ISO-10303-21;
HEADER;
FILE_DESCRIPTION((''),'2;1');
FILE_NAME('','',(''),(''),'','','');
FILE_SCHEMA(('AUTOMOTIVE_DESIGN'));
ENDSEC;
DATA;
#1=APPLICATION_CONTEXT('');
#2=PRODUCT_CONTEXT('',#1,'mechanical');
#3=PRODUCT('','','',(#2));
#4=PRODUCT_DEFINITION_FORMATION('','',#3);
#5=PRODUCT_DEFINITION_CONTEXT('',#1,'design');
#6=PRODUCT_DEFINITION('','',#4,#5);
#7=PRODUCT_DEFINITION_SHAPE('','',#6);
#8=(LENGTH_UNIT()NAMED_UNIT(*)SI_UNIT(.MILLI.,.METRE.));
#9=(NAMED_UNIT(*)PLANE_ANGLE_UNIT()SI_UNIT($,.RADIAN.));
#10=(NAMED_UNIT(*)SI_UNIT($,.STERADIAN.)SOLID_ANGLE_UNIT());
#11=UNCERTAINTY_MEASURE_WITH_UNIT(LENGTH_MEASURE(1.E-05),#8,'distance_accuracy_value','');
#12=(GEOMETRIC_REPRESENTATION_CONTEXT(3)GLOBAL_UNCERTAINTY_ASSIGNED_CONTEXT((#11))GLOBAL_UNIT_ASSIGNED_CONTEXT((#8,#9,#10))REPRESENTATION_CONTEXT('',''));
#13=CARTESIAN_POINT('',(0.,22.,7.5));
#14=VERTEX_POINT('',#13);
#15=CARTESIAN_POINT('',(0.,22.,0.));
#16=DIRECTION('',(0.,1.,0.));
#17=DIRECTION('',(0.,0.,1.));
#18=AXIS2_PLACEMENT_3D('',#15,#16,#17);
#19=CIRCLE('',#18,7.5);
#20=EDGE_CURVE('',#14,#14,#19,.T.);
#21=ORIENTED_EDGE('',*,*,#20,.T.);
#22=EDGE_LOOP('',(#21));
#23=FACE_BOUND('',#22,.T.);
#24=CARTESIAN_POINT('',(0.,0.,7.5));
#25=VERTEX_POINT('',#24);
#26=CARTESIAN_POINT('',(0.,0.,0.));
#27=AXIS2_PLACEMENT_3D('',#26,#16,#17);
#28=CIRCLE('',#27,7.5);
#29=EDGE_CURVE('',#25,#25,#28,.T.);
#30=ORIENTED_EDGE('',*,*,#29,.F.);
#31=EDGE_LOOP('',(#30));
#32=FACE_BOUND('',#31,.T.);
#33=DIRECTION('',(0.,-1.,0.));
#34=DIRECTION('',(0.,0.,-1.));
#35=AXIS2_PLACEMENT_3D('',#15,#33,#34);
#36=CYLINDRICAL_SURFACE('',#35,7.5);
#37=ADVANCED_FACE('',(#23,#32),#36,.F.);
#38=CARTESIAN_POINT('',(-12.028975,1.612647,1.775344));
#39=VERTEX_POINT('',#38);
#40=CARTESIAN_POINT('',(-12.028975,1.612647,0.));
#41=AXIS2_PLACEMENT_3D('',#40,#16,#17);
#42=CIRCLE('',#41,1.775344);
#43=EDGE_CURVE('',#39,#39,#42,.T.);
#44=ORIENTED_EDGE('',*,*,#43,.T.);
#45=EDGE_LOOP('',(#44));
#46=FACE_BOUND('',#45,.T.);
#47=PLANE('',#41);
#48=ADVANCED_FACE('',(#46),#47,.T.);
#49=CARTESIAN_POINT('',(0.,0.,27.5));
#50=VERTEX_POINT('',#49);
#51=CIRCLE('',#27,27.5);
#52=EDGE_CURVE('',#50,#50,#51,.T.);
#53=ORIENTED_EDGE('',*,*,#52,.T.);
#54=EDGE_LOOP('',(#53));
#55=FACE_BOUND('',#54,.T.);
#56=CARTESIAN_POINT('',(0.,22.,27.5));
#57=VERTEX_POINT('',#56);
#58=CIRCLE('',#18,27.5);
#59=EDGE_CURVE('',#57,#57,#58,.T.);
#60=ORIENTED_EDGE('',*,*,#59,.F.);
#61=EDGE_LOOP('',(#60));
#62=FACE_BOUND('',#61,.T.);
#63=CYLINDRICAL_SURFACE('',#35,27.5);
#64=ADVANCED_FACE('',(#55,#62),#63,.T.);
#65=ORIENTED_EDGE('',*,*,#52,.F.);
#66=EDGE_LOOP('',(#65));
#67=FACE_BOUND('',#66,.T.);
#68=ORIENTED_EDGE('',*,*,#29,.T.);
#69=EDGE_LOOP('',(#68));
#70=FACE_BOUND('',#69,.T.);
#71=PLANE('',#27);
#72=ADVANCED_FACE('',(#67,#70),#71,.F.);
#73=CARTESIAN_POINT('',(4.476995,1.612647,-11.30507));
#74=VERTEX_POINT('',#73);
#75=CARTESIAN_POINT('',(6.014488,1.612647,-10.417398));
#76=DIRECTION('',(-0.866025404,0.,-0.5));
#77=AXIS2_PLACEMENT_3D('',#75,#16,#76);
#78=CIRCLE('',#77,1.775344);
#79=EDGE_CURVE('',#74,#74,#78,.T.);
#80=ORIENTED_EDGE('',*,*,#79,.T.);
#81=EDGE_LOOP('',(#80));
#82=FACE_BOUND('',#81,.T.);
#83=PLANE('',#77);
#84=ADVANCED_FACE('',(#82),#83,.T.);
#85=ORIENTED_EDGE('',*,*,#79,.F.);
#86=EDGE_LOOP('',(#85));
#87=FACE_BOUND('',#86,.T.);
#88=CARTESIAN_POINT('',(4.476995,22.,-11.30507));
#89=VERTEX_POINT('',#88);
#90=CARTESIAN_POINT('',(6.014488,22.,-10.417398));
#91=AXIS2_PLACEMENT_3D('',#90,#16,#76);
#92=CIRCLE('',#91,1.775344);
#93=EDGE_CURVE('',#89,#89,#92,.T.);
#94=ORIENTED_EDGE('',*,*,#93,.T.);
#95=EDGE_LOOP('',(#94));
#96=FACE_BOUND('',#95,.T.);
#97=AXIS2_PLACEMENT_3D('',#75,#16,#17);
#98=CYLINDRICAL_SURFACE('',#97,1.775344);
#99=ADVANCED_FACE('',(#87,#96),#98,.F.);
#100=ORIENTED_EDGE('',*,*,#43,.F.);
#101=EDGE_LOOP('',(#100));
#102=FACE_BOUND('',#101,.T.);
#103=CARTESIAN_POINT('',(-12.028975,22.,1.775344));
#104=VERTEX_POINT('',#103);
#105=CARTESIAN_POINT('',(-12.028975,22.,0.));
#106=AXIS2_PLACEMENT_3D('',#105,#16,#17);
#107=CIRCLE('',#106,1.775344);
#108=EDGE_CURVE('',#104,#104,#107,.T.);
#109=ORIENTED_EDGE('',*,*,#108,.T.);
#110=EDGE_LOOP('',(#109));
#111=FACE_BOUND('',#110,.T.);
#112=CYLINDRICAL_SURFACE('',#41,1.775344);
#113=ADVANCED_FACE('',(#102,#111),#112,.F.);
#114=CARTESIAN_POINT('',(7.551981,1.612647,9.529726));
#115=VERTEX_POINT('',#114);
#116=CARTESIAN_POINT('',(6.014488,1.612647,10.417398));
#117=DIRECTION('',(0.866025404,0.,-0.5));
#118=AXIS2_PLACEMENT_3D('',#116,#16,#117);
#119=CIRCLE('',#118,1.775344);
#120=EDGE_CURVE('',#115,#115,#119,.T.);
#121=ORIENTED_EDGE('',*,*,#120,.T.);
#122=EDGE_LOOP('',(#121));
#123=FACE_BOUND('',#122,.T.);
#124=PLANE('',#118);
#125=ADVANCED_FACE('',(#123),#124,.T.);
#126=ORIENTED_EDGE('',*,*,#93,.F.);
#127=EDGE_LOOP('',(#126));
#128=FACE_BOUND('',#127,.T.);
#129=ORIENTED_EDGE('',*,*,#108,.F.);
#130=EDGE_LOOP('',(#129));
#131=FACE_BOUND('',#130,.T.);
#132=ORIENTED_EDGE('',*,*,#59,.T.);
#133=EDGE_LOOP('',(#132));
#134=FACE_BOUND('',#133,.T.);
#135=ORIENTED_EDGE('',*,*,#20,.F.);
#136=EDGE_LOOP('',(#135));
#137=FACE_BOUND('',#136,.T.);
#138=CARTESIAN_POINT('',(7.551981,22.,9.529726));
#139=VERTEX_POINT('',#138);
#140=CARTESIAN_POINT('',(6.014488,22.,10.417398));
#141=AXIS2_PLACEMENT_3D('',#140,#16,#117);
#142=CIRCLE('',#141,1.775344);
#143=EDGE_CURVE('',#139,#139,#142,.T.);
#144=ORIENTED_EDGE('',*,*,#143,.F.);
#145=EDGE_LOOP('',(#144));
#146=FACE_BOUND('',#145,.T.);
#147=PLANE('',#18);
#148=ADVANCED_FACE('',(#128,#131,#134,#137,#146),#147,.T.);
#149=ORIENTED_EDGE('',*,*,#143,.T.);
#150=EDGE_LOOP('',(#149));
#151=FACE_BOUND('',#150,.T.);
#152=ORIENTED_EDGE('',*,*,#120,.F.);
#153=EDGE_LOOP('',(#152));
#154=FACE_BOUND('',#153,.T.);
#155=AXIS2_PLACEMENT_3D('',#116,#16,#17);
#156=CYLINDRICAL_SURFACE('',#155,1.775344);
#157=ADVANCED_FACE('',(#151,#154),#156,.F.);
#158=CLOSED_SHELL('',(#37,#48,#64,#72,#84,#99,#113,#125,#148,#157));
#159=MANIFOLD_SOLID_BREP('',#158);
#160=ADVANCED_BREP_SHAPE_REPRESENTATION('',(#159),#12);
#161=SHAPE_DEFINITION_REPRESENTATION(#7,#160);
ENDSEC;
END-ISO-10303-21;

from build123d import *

# Parameters (mm, degrees)
SKETCH1_R           = 27.5
BOSS_EXTRUDE1_DEPTH = 22
SKETCH2_R           = 7.5
CUT_EXTRUDE1_DEPTH  = 45.682211225
SKETCH3_R           = 1.775343976
CUT_EXTRUDE2_DEPTH  = 20.387352892
CIRPATTERN1_COUNT   = 3


with BuildPart() as part:
    # Sketch1 → Boss-Extrude1 (new body)
    with BuildSketch(Plane(origin=(0, 0, 0), x_dir=(1, 0, 0), z_dir=(0, 1, 0))):
        Circle(SKETCH1_R)
    extrude(amount=BOSS_EXTRUDE1_DEPTH)

    # Sketch2 → Cut-Extrude1 (cut, through all)
    with BuildSketch(Plane(origin=(0, 0, 0), x_dir=(1, 0, 0), z_dir=(0, 1, 0))):
        Circle(SKETCH2_R)
    extrude(amount=CUT_EXTRUDE1_DEPTH, mode=Mode.SUBTRACT)

    # Sketch3 → Cut-Extrude2 (cut)
    with BuildSketch(Plane(origin=(0, 22, 0), x_dir=(1, 0, 0), z_dir=(0, 1, 0))):
        with Locations((-12.028975457, 0)):
            Circle(SKETCH3_R)
    cut_extrude2 = extrude(amount=-CUT_EXTRUDE2_DEPTH, mode=Mode.SUBTRACT)

    # CirPattern1: Cut-Extrude2 ×3 about axis
    cirpattern1_axis = Axis((0, 0, 0), (0, 1, 0))
    for i in range(1, CIRPATTERN1_COUNT):
        add(cut_extrude2.rotate(cirpattern1_axis, i * 360 / CIRPATTERN1_COUNT), mode=Mode.SUBTRACT)


solid = part.part
